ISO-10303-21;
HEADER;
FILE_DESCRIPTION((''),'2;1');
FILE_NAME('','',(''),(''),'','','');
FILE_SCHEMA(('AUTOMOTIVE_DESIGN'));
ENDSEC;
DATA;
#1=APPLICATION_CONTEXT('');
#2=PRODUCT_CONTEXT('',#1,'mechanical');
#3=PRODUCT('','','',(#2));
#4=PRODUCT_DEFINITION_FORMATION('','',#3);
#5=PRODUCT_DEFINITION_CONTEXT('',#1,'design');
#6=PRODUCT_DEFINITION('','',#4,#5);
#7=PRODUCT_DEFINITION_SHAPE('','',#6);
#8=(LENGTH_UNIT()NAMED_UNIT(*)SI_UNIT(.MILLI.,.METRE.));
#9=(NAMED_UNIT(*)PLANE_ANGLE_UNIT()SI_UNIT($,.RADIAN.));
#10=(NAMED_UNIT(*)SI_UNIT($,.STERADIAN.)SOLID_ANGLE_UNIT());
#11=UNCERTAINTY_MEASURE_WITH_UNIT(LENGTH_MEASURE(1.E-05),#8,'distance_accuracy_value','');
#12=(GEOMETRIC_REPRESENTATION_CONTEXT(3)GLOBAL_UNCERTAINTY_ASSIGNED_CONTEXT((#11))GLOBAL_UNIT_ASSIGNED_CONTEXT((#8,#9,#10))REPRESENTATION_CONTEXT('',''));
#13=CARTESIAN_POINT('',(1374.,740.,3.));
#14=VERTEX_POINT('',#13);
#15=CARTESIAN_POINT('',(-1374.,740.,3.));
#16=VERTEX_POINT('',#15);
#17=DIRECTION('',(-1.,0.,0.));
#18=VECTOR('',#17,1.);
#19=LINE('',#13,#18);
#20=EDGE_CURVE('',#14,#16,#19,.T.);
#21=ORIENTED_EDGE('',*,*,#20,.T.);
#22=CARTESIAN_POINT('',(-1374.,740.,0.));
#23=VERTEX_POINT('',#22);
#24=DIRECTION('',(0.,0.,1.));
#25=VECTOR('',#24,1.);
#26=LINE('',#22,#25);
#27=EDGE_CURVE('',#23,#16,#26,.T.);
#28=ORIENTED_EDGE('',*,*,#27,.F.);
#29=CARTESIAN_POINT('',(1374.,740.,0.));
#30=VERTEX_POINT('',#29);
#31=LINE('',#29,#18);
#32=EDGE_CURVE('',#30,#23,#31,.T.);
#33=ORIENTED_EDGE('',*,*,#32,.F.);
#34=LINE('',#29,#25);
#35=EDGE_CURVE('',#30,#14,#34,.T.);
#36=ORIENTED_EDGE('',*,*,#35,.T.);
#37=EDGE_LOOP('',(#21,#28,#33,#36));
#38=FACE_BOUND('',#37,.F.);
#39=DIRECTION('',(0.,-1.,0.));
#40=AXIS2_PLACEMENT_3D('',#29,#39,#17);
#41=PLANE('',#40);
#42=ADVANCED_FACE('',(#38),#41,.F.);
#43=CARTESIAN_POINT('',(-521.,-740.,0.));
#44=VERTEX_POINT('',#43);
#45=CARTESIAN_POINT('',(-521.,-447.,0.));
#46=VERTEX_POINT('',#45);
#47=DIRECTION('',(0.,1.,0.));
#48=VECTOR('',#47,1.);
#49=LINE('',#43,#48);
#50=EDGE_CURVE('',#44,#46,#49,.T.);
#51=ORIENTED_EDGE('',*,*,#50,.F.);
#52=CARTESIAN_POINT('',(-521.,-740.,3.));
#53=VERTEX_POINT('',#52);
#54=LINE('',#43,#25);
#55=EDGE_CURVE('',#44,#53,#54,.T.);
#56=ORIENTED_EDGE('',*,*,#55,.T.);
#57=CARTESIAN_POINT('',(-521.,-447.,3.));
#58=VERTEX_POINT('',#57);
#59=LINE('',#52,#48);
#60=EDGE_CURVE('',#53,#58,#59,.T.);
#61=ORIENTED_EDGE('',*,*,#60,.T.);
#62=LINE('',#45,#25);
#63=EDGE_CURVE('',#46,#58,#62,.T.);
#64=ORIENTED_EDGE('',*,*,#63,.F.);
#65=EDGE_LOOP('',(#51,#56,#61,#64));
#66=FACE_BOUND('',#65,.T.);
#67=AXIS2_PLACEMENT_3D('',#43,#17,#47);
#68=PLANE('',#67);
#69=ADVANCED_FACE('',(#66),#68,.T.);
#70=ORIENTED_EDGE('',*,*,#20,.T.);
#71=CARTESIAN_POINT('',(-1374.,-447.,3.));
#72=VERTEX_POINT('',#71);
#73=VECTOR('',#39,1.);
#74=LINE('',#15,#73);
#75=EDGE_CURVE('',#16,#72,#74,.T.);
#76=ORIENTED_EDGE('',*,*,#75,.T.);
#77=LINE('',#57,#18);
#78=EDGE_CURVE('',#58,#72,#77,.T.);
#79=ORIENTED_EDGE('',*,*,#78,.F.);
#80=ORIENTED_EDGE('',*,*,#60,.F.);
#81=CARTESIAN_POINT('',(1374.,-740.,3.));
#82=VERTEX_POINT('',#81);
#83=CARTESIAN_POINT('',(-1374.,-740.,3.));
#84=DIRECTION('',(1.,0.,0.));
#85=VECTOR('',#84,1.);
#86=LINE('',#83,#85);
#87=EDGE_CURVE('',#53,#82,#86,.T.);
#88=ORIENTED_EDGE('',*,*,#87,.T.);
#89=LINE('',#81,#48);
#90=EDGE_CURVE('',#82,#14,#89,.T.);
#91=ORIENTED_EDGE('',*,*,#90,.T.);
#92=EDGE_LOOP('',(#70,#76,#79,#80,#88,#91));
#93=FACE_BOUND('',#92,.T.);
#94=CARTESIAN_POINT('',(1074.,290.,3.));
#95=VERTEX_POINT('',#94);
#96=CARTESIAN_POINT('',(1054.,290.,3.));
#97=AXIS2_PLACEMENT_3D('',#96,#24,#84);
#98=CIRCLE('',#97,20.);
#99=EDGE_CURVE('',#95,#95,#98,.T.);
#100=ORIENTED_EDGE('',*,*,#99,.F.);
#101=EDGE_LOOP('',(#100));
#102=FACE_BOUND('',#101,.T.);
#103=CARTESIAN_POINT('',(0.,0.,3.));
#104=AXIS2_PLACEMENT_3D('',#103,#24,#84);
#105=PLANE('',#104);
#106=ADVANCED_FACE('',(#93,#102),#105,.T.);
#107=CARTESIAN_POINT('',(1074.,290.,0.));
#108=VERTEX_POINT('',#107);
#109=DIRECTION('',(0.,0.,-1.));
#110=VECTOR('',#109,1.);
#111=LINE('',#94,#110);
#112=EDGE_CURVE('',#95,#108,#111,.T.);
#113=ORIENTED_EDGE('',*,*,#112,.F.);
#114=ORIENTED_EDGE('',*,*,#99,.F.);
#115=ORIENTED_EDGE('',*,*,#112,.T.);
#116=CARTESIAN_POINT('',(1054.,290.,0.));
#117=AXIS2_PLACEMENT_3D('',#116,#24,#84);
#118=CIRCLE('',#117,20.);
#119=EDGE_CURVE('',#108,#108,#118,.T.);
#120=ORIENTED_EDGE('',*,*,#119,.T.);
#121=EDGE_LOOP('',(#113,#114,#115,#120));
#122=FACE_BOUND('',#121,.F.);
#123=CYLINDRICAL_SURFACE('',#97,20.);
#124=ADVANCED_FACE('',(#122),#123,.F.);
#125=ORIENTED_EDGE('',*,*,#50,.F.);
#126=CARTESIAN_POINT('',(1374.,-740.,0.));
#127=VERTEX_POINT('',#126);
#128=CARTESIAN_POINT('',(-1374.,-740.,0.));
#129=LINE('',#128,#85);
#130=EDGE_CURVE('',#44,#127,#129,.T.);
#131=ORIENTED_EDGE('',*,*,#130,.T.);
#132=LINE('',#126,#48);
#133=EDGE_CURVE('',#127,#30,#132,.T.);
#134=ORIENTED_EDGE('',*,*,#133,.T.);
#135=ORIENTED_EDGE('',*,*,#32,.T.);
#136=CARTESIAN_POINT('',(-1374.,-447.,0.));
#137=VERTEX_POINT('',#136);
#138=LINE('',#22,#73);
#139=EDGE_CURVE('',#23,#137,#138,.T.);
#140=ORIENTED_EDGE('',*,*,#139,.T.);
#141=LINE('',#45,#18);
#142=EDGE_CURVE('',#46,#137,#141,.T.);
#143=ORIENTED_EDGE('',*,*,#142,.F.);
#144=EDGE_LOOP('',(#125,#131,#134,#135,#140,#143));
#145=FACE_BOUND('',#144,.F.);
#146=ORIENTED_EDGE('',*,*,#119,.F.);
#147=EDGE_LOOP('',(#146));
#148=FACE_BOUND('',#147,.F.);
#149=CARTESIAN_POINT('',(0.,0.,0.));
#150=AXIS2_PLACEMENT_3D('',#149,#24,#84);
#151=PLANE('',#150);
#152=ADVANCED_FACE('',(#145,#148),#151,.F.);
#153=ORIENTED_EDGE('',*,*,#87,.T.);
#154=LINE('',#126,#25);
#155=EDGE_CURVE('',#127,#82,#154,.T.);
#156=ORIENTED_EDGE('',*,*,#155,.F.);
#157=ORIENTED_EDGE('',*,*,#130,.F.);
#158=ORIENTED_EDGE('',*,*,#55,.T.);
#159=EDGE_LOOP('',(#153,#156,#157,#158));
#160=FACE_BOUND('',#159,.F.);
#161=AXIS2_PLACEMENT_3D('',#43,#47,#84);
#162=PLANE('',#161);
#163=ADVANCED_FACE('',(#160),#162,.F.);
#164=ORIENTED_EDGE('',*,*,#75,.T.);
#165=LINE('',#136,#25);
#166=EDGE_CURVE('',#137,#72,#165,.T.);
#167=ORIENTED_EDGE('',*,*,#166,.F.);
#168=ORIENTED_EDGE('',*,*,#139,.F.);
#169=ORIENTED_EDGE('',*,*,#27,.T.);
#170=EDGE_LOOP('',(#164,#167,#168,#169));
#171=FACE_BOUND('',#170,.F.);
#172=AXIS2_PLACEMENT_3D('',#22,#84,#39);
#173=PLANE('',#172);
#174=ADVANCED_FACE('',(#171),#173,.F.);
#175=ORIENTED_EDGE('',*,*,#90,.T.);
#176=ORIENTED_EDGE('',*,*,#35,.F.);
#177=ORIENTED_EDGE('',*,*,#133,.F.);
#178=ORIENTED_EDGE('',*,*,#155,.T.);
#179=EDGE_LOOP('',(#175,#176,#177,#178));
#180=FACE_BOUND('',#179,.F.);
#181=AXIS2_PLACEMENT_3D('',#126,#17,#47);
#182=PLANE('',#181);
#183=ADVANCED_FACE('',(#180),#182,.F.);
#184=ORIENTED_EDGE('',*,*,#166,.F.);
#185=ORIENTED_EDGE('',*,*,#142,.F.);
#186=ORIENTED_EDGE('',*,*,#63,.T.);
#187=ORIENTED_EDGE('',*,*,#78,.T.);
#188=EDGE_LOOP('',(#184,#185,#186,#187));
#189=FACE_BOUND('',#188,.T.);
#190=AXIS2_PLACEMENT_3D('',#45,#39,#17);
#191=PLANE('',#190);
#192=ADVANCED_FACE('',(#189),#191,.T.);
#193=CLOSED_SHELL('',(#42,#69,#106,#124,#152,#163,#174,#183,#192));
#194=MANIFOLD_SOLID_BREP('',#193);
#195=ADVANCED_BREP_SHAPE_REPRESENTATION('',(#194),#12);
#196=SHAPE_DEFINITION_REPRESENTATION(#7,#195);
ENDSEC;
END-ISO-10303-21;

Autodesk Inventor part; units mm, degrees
ref_plane "YZ Plane" through (0, 0, 0) normal (1, 0, 0) x (0, 1, 0)
ref_plane "XZ Plane" through (0, 0, 0) normal (0, 1, 0) x (-1, 0, 0)
ref_plane "XY Plane" through (0, 0, 0) normal (0, 0, 1) x (1, 0, 0)
sketch "Sketch1" plane through (0, 0, 0) normal (0, 0, 1) x (1, 0, 0)
  line L0 (-1374, -740) -> (1374, -740)
  line L1 (1374, -740) -> (1374, 740)
  line L2 (1374, 740) -> (-1374, 740)
  line L3 (-1374, 740) -> (-1374, -740)
  line L4 (-1374, -740) -> (1374, 740) construction
  line L5 (1374, -740) -> (-1374, 740) construction
  line L6 (-1374, -740) -> (-521, -740)
  line L7 (-521, -740) -> (-521, -447)
  line L8 (-521, -447) -> (-1374, -447)
  line L9 (-1374, -447) -> (-1374, -740)
  point P0 (0, 0)
  point P1 (-1374, -593.5)
  point P2 (-521, -740)
  dimension "d0" = 2748
  dimension "d1" = 1480
  dimension "d30" = 293
  dimension "d31" = 853
extrude "Plate1" add sketch "Sketch1" along normal blind 3 contours L7 L8 L3 L2 L1 L0
sketch "Sketch5" plane through (0, 0, 3) normal (0, 0, 1) x (1, 0, 0)
  line L0 (1349, 715) -> (1349, 515) construction
  line L1 (1349, 515) -> (1334, 515) construction
  line L2 (1334, 515) -> (1334, 715) construction
  line L3 (1334, 715) -> (1349, 715) construction
  line L4 (1374, 740) -> (1374, -740) projected
  line L5 (-1374, 740) -> (1374, 740) projected
  point P0 (0, 0)
  dimension "d26" = 200
  dimension "d27" = 15
  dimension "d28" = 25
  dimension "d29" = 25
mark "Mark1"
sketch "Sketch6" plane through (-1374, 740, 3) normal (0, 0, 1) x (1, 0, 0)
  circle A0 centre (2428, -450) radius 20
  line L0 (2748, 0) -> (2748, -1480) projected
  line L1 (0, 0) -> (2748, 0) projected
  point P0 (1374, -740)
  dimension "d32" = 40
  dimension "d33" = 320
  dimension "d34" = 450
extrude "Extrusion2" cut sketch "Sketch6" against normal up to surface (3 mm away)
equation "\"d2\" = Thickness"
equation "\"BendReliefWidth\" = Thickness"
equation "\"BendReliefDepth\" = 0.5 * Thickness"
equation "\"CornerReliefSize\" = 4 * Thickness"
equation "\"MinimumRemnant\" = 2 * Thickness"
equation "\"TransitionRadius\" = BendRadius"
equation "\"JacobiRadiusSize\" = BendRadius"
equation "\"GapSize\" = Thickness"
equation "\"Thickness\" = 3"
equation "\"BendRadius\" = 5"
properties part number "BSH 044 board" material "09g2s"
